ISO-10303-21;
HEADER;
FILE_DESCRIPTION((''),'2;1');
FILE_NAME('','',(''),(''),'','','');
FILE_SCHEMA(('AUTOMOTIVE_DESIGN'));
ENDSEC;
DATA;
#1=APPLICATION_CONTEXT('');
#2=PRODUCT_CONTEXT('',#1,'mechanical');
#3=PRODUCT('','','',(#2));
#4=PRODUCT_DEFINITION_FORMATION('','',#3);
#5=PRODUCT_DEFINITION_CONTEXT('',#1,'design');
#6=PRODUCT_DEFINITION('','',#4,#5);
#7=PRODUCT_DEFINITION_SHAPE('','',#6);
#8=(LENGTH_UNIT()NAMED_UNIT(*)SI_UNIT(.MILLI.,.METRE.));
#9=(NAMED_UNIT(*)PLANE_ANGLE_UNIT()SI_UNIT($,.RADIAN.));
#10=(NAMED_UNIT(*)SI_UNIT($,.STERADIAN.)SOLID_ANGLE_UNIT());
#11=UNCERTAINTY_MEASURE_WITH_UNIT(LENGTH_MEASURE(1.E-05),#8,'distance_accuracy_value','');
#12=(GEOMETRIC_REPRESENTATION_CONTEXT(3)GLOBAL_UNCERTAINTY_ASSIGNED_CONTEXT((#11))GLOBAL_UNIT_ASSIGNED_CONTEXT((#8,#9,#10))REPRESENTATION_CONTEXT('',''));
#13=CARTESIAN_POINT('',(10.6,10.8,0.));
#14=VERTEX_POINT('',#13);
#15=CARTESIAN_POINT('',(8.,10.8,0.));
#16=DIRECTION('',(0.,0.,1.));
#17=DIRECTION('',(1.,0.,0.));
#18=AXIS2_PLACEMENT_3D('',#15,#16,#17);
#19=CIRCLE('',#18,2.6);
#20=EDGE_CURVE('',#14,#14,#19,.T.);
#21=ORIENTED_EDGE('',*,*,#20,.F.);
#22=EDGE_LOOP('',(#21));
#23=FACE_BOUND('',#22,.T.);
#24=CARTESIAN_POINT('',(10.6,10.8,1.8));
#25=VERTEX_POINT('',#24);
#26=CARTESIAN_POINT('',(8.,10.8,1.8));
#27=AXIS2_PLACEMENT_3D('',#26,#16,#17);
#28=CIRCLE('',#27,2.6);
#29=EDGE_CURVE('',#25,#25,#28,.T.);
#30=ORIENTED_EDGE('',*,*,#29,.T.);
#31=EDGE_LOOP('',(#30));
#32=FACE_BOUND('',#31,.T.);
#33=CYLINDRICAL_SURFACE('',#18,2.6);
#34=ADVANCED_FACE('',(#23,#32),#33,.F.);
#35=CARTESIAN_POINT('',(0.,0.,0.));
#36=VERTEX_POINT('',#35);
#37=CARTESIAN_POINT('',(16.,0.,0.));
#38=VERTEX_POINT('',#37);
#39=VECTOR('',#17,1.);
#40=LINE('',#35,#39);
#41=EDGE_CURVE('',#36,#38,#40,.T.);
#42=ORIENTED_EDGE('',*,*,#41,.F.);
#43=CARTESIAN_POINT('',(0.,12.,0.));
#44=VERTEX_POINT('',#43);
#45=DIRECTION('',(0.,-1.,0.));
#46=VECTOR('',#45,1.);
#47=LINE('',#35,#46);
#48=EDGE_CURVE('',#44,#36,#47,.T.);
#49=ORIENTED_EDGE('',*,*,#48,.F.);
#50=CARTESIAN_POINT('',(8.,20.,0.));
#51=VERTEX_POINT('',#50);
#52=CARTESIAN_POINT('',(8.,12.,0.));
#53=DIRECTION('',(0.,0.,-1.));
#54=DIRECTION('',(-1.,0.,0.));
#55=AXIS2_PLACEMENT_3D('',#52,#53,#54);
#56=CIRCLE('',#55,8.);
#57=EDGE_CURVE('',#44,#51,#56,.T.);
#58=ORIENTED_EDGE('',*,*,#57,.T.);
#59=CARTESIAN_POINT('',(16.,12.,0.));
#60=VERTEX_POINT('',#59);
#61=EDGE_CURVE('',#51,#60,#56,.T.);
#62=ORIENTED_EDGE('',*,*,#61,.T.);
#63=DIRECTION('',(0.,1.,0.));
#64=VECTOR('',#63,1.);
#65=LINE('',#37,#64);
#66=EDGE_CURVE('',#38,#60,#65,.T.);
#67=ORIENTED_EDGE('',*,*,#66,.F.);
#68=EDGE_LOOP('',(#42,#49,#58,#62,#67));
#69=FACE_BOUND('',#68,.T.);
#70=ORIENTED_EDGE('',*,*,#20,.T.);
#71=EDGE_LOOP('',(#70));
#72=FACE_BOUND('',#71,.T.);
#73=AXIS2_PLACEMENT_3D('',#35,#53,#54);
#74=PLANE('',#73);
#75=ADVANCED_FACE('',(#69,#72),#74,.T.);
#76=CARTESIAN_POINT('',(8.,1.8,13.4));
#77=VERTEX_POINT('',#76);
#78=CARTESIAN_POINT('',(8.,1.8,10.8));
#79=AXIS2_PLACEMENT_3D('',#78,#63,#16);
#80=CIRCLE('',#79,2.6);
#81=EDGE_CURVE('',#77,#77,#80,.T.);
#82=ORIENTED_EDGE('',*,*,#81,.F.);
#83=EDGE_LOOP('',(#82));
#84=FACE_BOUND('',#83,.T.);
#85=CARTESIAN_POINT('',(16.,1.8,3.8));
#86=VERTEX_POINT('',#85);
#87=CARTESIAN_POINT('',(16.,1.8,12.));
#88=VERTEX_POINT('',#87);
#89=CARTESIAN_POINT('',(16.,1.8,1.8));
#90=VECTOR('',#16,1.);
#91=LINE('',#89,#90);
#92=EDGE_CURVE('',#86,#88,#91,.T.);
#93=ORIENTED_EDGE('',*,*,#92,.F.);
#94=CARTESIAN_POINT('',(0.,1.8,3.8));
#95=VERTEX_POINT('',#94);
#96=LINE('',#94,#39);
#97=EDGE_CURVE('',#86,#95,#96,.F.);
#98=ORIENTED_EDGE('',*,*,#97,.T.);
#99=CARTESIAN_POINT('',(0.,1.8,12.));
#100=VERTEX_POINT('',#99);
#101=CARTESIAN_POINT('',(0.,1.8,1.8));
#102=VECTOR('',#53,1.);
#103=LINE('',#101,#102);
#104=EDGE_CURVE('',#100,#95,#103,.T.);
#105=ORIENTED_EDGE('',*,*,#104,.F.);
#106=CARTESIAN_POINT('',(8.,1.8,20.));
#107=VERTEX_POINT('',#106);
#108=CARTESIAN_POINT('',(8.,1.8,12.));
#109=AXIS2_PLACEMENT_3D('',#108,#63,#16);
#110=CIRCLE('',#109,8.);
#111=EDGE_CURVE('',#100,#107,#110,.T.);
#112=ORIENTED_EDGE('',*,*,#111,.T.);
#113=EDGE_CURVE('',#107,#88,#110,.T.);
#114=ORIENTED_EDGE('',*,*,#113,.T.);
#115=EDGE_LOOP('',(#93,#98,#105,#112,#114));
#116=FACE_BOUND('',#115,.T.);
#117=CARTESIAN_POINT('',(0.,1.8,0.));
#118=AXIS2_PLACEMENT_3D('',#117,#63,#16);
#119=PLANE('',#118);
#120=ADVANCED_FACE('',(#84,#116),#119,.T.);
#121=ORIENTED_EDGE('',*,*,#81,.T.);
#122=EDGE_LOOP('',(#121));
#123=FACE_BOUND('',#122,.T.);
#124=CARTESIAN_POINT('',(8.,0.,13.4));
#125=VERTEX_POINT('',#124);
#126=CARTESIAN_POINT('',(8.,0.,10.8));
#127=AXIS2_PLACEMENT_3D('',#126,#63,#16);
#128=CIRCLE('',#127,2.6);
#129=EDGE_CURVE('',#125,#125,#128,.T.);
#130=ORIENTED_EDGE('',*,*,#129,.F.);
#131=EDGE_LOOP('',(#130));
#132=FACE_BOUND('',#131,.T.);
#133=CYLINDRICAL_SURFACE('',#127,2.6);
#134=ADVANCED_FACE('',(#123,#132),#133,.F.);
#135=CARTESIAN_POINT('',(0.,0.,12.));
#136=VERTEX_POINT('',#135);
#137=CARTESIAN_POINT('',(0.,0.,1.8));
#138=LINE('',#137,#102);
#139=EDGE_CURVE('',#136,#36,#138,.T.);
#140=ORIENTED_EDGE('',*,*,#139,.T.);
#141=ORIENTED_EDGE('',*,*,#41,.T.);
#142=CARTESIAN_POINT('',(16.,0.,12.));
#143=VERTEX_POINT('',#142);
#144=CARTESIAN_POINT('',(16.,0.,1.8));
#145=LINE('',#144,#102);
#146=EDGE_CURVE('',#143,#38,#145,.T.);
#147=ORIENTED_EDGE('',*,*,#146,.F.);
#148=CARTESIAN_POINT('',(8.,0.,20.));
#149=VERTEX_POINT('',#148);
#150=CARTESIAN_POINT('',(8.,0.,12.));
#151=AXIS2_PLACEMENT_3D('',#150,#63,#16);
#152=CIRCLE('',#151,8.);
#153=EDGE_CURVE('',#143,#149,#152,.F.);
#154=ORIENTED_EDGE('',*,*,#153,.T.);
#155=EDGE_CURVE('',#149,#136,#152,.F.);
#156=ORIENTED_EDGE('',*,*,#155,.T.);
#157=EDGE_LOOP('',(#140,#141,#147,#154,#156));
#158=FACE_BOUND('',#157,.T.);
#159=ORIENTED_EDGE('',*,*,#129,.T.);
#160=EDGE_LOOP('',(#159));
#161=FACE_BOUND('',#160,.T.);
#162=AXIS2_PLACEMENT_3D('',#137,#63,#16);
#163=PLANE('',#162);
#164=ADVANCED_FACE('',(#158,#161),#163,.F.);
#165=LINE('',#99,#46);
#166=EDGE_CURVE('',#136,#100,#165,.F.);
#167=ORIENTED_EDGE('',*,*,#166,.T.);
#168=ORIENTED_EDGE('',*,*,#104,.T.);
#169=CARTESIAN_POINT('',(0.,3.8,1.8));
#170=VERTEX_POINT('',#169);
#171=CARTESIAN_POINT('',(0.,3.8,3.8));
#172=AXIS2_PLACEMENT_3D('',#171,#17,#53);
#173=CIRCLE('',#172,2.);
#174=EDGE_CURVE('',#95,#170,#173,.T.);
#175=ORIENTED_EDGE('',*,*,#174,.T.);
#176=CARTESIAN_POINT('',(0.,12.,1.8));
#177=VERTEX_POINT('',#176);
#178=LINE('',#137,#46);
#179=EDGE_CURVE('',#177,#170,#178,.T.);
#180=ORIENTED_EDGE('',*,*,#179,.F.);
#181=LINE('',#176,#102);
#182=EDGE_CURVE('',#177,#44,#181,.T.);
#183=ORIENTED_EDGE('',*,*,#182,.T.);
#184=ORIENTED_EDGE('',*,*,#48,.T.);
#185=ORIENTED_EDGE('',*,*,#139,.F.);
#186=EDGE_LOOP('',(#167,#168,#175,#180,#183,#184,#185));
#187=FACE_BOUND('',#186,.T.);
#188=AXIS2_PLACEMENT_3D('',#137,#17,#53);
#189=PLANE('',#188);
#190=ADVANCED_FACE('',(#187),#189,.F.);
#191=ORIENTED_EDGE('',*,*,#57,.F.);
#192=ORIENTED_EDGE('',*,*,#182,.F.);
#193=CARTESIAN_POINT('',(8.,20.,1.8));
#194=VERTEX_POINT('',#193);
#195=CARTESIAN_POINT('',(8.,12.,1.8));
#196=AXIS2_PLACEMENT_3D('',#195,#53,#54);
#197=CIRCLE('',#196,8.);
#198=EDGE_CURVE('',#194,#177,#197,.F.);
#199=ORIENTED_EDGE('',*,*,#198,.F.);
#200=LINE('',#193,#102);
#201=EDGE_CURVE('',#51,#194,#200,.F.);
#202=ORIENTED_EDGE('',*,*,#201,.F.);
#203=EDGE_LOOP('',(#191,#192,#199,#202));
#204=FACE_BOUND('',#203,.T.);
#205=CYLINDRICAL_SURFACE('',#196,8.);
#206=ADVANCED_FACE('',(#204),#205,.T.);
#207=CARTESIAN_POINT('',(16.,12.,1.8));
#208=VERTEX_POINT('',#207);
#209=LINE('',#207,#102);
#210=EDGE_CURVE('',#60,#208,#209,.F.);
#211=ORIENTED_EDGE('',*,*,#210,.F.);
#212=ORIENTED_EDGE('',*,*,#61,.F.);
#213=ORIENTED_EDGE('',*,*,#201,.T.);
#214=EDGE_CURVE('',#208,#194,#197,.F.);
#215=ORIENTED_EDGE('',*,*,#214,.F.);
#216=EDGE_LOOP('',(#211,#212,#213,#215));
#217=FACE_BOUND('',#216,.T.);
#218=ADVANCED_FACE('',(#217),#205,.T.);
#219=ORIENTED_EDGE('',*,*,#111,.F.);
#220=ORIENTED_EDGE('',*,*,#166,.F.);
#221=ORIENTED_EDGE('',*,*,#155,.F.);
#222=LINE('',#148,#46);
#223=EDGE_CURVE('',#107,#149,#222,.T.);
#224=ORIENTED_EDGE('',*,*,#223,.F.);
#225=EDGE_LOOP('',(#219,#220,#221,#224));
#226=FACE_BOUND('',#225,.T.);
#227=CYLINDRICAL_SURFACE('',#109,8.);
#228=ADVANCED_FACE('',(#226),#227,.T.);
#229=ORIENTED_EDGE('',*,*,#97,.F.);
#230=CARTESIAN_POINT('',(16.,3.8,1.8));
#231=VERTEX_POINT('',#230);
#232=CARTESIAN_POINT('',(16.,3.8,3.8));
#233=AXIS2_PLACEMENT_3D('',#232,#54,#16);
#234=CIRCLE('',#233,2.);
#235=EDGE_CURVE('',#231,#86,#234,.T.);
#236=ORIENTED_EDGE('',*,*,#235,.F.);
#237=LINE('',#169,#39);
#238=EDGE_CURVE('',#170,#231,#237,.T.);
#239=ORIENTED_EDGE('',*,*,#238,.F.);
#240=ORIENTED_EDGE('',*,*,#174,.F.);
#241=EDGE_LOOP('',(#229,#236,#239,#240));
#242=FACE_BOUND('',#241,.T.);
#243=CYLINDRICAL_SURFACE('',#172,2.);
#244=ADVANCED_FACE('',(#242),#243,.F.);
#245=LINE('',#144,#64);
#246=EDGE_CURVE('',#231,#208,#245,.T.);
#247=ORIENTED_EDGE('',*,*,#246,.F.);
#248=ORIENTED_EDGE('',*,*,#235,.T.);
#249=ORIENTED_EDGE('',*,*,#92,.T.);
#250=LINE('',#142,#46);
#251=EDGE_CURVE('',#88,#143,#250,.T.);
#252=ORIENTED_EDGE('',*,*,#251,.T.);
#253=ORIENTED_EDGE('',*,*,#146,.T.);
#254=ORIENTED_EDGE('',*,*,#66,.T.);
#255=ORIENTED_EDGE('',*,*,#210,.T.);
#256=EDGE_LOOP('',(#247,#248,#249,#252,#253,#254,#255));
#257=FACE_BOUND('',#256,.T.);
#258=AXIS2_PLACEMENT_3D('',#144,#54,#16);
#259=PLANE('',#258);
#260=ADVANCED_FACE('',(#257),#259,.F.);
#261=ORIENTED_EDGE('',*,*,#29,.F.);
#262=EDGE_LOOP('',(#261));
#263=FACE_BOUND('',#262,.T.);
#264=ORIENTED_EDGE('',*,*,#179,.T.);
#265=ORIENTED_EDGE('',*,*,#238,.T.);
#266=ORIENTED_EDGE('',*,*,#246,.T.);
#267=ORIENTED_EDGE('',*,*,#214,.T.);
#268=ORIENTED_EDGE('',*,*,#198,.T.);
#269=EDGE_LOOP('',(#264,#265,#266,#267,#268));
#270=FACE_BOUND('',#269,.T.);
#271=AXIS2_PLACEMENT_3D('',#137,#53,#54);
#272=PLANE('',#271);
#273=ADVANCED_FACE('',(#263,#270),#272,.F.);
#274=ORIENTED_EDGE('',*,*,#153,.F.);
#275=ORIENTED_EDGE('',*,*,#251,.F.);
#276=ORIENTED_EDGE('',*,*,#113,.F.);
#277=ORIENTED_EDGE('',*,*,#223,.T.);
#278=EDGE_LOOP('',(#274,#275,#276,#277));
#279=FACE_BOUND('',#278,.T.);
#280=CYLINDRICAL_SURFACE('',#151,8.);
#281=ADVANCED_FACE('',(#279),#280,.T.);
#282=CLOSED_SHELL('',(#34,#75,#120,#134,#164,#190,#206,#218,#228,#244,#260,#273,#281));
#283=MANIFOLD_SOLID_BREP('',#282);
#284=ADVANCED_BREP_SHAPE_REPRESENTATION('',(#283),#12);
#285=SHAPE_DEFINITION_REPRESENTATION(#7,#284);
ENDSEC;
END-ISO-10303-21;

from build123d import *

# Parameters (mm, degrees)
SKETCH1_W           = 16
SKETCH1_H           = 20
BOSS_EXTRUDE1_DEPTH = 1.8
SKETCH2_W           = 16
SKETCH2_H           = 18.2
BOSS_EXTRUDE2_DEPTH = 1.8
SKETCH3_R           = 2.6
CUT_EXTRUDE1_DEPTH  = 1.8
SKETCH4_R           = 2.6
CUT_EXTRUDE2_DEPTH  = 1.8
FILLET1_R           = 2
FILLET2_R           = 8


with BuildPart() as part:
    # Sketch1 → Boss-Extrude1 (new body)
    with BuildSketch(Plane.XY):
        with Locations((8, 10)):
            Rectangle(SKETCH1_W, SKETCH1_H)
    extrude(amount=BOSS_EXTRUDE1_DEPTH)

    # Sketch2 → Boss-Extrude2 (add)
    with BuildSketch(Plane.XZ):
        with Locations((8, 10.9)):
            Rectangle(SKETCH2_W, SKETCH2_H)
    extrude(amount=-BOSS_EXTRUDE2_DEPTH)

    # Sketch3 → Cut-Extrude1 (cut)
    with BuildSketch(Plane.XY.offset(1.8)):
        with Locations((8, 10.8)):
            Circle(SKETCH3_R)
    extrude(amount=-CUT_EXTRUDE1_DEPTH, mode=Mode.SUBTRACT)

    # Sketch4 → Cut-Extrude2 (cut)
    with BuildSketch(Plane(origin=(0, 1.8, 0), x_dir=(1, 0, 0), z_dir=(0, 1, 0))):
        with Locations(Location((8, -10.8, 0), (0, 0, 270))):
            Circle(SKETCH4_R)
    extrude(amount=-CUT_EXTRUDE2_DEPTH, mode=Mode.SUBTRACT)

    # Fillet1
    fillet1_edges = [part.edges().sort_by_distance(p)[0] for p in [
        (8, 1.8, 1.8),
    ]]
    fillet(fillet1_edges, radius=FILLET1_R)

    # Fillet2
    fillet2_edges = [part.edges().sort_by_distance(p)[0] for p in [
        (16, 0.9, 20),
        (0, 0.9, 20),
        (16, 20, 0.9),
        (0, 20, 0.9),
    ]]
    fillet(fillet2_edges, radius=FILLET2_R - 0.0001)  # a hair under: the kernel refuses the full size


solid = part.part
